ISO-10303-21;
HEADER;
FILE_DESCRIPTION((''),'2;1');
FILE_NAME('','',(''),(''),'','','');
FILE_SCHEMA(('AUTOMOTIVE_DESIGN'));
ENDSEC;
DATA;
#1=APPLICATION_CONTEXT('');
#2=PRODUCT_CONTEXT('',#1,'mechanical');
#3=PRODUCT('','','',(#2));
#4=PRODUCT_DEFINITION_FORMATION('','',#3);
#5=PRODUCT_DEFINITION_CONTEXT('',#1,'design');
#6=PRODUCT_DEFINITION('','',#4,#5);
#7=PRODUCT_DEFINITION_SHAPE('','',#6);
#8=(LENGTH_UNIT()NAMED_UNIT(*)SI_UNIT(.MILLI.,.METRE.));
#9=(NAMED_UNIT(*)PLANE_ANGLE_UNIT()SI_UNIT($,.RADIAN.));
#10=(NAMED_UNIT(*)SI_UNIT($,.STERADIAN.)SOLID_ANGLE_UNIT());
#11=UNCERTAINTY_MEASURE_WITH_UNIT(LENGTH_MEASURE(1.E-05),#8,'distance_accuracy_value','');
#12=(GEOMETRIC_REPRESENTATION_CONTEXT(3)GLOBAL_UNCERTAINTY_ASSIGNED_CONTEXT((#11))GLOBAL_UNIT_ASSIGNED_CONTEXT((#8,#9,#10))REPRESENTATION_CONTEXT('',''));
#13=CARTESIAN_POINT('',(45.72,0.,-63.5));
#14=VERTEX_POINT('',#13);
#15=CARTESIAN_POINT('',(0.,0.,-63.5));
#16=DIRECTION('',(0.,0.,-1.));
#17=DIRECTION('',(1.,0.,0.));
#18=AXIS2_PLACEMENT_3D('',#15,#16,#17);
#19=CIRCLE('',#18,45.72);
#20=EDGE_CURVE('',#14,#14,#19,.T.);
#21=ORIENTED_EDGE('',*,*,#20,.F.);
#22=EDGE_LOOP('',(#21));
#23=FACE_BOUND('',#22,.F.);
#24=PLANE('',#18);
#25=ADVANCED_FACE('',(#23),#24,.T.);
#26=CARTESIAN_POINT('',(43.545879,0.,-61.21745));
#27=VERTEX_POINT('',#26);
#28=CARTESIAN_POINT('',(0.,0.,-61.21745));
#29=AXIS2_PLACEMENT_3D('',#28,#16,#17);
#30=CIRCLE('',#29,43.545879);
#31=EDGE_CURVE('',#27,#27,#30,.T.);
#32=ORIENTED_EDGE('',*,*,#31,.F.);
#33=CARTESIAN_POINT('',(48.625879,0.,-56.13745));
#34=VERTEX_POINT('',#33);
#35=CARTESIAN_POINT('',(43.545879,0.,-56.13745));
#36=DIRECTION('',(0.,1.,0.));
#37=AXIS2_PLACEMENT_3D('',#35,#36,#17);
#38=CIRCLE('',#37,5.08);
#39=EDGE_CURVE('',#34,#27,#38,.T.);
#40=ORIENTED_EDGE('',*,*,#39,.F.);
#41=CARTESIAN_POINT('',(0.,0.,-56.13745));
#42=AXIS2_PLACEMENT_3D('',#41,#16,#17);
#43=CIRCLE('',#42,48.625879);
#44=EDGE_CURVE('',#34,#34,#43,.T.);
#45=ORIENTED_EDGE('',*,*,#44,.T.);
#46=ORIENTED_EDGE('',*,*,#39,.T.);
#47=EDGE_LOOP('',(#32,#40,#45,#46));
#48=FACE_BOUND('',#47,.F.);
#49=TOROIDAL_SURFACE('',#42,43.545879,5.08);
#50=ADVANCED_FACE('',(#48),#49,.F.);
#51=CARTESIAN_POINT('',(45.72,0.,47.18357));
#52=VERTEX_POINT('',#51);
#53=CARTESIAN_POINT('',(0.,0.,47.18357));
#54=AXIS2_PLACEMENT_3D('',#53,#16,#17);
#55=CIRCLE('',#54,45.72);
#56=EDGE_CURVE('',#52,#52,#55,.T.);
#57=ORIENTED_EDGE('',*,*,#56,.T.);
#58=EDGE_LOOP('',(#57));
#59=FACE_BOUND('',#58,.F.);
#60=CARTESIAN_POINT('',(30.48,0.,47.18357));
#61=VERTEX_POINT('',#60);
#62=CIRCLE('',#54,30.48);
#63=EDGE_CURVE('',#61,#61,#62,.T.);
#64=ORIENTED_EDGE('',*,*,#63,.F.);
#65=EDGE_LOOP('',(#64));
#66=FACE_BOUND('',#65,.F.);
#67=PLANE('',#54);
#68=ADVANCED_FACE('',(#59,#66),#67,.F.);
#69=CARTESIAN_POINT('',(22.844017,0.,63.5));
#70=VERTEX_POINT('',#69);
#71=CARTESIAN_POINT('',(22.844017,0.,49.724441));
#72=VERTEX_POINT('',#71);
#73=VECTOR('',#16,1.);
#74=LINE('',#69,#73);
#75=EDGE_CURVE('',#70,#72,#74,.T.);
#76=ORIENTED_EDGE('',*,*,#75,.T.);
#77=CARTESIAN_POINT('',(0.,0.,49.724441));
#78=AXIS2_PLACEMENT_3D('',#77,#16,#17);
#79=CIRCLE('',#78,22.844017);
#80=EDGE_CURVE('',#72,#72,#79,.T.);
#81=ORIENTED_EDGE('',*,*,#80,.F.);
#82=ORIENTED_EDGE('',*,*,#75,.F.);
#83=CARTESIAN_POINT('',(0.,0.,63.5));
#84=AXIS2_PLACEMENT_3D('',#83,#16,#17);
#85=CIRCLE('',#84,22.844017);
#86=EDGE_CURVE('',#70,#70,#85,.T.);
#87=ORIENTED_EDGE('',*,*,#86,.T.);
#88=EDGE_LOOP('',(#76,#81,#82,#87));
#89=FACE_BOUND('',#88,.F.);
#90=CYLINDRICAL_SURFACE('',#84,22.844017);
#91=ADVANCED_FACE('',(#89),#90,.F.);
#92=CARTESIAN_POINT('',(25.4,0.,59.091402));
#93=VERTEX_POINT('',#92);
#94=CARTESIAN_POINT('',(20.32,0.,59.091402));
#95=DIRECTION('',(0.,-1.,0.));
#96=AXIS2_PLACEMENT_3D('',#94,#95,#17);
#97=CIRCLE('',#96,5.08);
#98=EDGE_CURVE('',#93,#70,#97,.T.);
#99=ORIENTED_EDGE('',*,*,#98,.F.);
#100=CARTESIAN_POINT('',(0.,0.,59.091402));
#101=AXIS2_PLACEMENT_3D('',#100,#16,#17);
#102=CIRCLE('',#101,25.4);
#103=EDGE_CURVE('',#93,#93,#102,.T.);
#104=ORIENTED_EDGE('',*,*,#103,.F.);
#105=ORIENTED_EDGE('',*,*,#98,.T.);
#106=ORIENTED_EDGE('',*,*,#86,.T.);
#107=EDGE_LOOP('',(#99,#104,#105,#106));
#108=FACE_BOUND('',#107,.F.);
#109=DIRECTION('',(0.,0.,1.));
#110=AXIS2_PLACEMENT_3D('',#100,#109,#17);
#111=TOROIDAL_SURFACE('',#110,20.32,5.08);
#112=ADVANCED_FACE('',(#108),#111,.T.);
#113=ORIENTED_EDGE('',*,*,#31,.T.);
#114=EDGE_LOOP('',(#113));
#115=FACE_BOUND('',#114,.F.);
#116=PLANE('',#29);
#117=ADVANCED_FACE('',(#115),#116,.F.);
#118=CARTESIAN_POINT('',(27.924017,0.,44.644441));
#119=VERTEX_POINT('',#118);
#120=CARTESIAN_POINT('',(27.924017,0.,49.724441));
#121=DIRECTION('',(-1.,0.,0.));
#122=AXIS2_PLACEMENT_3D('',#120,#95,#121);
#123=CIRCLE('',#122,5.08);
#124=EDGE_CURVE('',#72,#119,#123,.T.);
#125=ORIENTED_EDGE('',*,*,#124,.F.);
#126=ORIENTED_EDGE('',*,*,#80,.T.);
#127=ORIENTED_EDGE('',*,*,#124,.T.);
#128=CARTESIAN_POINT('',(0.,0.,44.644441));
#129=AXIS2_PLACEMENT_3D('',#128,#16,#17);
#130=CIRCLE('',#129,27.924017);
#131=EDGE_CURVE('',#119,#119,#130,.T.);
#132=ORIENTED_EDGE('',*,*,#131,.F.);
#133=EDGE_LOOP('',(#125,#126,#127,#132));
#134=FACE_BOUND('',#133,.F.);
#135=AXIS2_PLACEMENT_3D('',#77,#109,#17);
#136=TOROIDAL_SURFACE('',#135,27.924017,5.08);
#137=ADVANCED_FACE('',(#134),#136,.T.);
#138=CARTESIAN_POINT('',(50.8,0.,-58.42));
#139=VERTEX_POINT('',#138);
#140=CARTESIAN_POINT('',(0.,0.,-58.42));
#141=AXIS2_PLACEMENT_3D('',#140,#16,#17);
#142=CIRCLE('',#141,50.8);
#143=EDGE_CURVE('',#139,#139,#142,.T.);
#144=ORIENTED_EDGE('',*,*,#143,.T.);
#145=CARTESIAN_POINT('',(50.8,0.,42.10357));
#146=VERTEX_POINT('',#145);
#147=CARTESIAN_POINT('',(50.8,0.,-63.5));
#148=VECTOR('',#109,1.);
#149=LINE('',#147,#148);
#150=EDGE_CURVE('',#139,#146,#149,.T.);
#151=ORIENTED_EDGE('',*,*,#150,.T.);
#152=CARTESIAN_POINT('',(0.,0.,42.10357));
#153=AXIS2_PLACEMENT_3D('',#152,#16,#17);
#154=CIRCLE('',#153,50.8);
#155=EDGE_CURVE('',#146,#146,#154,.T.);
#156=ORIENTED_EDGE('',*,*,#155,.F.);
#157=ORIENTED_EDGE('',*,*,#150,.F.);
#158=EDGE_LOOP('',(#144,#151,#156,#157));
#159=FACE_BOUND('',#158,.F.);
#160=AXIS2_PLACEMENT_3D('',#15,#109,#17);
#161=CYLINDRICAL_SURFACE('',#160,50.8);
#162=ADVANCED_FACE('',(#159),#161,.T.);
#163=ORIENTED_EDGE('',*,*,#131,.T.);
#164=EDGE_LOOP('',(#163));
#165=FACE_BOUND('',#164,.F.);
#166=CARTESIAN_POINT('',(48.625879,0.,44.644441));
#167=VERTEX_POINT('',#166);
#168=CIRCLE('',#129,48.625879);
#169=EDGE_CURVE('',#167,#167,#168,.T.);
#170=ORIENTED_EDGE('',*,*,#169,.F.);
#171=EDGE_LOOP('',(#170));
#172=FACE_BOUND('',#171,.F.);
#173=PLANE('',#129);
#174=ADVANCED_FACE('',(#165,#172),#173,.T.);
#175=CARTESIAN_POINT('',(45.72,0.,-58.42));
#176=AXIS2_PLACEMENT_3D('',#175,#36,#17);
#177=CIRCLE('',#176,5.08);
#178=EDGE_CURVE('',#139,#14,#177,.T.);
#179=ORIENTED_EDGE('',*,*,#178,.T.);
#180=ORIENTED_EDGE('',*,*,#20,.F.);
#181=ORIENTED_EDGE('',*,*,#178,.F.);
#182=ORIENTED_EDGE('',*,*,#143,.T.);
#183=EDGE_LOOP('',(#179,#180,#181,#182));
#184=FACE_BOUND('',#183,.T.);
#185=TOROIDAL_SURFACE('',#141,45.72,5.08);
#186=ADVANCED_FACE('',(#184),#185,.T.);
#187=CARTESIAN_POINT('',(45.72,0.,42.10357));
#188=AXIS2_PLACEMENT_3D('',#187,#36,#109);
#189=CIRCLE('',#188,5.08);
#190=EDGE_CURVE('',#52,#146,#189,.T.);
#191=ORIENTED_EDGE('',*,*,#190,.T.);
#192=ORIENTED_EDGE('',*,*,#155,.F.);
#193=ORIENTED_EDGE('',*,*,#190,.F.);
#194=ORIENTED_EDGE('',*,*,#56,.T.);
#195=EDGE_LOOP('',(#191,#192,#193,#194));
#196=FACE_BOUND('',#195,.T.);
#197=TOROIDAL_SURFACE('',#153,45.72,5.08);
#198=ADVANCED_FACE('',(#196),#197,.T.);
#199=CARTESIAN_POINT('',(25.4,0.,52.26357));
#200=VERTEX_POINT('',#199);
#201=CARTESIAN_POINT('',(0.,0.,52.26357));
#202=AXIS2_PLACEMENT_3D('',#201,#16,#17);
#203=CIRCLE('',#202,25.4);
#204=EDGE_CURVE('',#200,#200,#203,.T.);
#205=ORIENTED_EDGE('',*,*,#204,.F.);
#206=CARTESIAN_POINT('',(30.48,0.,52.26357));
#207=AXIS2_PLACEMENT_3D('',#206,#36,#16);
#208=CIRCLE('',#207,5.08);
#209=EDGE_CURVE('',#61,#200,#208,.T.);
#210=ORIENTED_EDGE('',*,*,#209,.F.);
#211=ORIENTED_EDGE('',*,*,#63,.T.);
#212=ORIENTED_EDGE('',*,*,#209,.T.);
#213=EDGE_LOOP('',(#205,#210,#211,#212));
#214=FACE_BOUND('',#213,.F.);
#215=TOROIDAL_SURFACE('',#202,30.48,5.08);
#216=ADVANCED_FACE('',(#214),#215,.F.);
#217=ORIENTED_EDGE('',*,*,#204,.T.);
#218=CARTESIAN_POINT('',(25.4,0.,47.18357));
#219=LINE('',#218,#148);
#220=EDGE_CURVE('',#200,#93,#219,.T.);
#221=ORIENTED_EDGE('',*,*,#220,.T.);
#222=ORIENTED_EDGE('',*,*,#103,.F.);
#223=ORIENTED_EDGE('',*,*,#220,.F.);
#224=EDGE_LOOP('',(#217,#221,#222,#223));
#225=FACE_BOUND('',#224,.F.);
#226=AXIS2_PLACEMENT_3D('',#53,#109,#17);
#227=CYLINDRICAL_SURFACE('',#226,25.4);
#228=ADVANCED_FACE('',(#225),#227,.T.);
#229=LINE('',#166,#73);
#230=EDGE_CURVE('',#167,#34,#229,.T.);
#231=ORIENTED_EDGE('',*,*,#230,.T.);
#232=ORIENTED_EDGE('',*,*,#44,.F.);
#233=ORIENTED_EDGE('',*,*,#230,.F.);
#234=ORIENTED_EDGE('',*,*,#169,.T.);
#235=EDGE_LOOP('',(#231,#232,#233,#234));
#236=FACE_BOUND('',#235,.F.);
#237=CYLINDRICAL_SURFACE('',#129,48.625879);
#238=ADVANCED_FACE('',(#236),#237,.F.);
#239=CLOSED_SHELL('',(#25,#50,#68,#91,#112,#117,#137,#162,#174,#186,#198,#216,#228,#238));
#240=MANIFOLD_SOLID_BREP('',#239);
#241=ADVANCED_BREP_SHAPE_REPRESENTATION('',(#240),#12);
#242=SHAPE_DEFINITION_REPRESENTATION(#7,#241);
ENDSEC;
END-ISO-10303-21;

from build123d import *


# Not quite as in the source:
# - a fillet or chamfer that OpenCascade refuses, or shapes differently, is made with other operations: its cross-section is extruded or revolved along the edge and cut away or added


with BuildPart() as f1:
    # F0 (on Front) → F1 (revolve)
    with BuildSketch(Plane.XZ):
        Polygon((25.4, 63.5), (22.844016552, 63.5), (22.844016552, 44.6444414556), (48.6258789897, 44.6444414556), (48.6258789897, -61.2174496055), (1.9450800028, -61.2174496055), (0, -61.2174496055), (0, -63.5), (50.8, -63.5), (50.8, 47.1835695207), (25.4, 47.1835695207), (25.4, 62.8089383245), align=None)
    revolve(axis=Axis((0, 0, -31.75), (0, 0, -1)))

    # F2: fillet of radius 5.08 on 7 edges, made by hand

    # F2_s1 → F2_t2 (revolve)
    with BuildSketch(Plane.XZ):
        with BuildLine():
            ThreePointArc((30.48, 47.1835695207), (26.8878975516, 48.6714670723), (25.4, 52.2635695207))
            Line((25.4, 52.2635695207), (25.4, 47.1835695207))
            Line((25.4, 47.1835695207), (30.48, 47.1835695207))
        make_face()
    revolve(axis=Axis((0, 0, 47.1835695207), (0, 0, -1)))

    # F2_s3 → F2_t4 (revolve)
    with BuildSketch(Plane.XZ):
        with BuildLine():
            ThreePointArc((48.6258789897, -56.1374496055), (47.1379814381, -59.7295520539), (43.5458789897, -61.2174496055))
            Line((43.5458789897, -61.2174496055), (48.6258789897, -61.2174496055))
            Line((48.6258789897, -61.2174496055), (48.6258789897, -56.1374496055))
        make_face()
    revolve(axis=Axis((0, 0, -61.2174496055), (0, 0, -1)))

    # F2_s5 → F2_t6 (revolve, cut)
    with BuildSketch(Plane.XZ):
        with BuildLine():
            ThreePointArc((45.72, 47.1835695207), (49.3121024484, 45.6956719691), (50.8, 42.1035695207))
            Line((50.8, 42.1035695207), (50.8, 47.1835695207))
            Line((50.8, 47.1835695207), (45.72, 47.1835695207))
        make_face()
    revolve(axis=Axis((0, 0, 47.1835695207), (0, 0, -1)), mode=Mode.SUBTRACT)

    # F2_s7 → F2_t8 (revolve, cut)
    with BuildSketch(Plane.XZ):
        with BuildLine():
            ThreePointArc((25.4, 59.0914015328), (24.7147926051, 61.6393807238), (22.844016552, 63.5))
            Line((22.844016552, 63.5), (25.4, 63.5))
            Line((25.4, 63.5), (25.4, 59.0914015328))
        make_face()
    revolve(axis=Axis((0, 0, 63.5), (0, 0, -1)), mode=Mode.SUBTRACT)

    # F2_s9 → F2_t10 (revolve, cut)
    with BuildSketch(Plane.XZ):
        with BuildLine():
            ThreePointArc((22.844016552, 49.7244414556), (24.3319141035, 46.1323390072), (27.924016552, 44.6444414556))
            Line((27.924016552, 44.6444414556), (22.844016552, 44.6444414556))
            Line((22.844016552, 44.6444414556), (22.844016552, 49.7244414556))
        make_face()
    revolve(axis=Axis((0, 0, 44.6444414556), (0, 0, -1)), mode=Mode.SUBTRACT)

    # F2_s11 → F2_t12 (revolve, cut)
    with BuildSketch(Plane.XZ):
        with BuildLine():
            ThreePointArc((50.8, -58.42), (49.3121024484, -62.0121024484), (45.72, -63.5))
            Line((45.72, -63.5), (50.8, -63.5))
            Line((50.8, -63.5), (50.8, -58.42))
        make_face()
    revolve(axis=Axis((0, 0, -63.5), (0, 0, -1)), mode=Mode.SUBTRACT)


solid = f1.part
